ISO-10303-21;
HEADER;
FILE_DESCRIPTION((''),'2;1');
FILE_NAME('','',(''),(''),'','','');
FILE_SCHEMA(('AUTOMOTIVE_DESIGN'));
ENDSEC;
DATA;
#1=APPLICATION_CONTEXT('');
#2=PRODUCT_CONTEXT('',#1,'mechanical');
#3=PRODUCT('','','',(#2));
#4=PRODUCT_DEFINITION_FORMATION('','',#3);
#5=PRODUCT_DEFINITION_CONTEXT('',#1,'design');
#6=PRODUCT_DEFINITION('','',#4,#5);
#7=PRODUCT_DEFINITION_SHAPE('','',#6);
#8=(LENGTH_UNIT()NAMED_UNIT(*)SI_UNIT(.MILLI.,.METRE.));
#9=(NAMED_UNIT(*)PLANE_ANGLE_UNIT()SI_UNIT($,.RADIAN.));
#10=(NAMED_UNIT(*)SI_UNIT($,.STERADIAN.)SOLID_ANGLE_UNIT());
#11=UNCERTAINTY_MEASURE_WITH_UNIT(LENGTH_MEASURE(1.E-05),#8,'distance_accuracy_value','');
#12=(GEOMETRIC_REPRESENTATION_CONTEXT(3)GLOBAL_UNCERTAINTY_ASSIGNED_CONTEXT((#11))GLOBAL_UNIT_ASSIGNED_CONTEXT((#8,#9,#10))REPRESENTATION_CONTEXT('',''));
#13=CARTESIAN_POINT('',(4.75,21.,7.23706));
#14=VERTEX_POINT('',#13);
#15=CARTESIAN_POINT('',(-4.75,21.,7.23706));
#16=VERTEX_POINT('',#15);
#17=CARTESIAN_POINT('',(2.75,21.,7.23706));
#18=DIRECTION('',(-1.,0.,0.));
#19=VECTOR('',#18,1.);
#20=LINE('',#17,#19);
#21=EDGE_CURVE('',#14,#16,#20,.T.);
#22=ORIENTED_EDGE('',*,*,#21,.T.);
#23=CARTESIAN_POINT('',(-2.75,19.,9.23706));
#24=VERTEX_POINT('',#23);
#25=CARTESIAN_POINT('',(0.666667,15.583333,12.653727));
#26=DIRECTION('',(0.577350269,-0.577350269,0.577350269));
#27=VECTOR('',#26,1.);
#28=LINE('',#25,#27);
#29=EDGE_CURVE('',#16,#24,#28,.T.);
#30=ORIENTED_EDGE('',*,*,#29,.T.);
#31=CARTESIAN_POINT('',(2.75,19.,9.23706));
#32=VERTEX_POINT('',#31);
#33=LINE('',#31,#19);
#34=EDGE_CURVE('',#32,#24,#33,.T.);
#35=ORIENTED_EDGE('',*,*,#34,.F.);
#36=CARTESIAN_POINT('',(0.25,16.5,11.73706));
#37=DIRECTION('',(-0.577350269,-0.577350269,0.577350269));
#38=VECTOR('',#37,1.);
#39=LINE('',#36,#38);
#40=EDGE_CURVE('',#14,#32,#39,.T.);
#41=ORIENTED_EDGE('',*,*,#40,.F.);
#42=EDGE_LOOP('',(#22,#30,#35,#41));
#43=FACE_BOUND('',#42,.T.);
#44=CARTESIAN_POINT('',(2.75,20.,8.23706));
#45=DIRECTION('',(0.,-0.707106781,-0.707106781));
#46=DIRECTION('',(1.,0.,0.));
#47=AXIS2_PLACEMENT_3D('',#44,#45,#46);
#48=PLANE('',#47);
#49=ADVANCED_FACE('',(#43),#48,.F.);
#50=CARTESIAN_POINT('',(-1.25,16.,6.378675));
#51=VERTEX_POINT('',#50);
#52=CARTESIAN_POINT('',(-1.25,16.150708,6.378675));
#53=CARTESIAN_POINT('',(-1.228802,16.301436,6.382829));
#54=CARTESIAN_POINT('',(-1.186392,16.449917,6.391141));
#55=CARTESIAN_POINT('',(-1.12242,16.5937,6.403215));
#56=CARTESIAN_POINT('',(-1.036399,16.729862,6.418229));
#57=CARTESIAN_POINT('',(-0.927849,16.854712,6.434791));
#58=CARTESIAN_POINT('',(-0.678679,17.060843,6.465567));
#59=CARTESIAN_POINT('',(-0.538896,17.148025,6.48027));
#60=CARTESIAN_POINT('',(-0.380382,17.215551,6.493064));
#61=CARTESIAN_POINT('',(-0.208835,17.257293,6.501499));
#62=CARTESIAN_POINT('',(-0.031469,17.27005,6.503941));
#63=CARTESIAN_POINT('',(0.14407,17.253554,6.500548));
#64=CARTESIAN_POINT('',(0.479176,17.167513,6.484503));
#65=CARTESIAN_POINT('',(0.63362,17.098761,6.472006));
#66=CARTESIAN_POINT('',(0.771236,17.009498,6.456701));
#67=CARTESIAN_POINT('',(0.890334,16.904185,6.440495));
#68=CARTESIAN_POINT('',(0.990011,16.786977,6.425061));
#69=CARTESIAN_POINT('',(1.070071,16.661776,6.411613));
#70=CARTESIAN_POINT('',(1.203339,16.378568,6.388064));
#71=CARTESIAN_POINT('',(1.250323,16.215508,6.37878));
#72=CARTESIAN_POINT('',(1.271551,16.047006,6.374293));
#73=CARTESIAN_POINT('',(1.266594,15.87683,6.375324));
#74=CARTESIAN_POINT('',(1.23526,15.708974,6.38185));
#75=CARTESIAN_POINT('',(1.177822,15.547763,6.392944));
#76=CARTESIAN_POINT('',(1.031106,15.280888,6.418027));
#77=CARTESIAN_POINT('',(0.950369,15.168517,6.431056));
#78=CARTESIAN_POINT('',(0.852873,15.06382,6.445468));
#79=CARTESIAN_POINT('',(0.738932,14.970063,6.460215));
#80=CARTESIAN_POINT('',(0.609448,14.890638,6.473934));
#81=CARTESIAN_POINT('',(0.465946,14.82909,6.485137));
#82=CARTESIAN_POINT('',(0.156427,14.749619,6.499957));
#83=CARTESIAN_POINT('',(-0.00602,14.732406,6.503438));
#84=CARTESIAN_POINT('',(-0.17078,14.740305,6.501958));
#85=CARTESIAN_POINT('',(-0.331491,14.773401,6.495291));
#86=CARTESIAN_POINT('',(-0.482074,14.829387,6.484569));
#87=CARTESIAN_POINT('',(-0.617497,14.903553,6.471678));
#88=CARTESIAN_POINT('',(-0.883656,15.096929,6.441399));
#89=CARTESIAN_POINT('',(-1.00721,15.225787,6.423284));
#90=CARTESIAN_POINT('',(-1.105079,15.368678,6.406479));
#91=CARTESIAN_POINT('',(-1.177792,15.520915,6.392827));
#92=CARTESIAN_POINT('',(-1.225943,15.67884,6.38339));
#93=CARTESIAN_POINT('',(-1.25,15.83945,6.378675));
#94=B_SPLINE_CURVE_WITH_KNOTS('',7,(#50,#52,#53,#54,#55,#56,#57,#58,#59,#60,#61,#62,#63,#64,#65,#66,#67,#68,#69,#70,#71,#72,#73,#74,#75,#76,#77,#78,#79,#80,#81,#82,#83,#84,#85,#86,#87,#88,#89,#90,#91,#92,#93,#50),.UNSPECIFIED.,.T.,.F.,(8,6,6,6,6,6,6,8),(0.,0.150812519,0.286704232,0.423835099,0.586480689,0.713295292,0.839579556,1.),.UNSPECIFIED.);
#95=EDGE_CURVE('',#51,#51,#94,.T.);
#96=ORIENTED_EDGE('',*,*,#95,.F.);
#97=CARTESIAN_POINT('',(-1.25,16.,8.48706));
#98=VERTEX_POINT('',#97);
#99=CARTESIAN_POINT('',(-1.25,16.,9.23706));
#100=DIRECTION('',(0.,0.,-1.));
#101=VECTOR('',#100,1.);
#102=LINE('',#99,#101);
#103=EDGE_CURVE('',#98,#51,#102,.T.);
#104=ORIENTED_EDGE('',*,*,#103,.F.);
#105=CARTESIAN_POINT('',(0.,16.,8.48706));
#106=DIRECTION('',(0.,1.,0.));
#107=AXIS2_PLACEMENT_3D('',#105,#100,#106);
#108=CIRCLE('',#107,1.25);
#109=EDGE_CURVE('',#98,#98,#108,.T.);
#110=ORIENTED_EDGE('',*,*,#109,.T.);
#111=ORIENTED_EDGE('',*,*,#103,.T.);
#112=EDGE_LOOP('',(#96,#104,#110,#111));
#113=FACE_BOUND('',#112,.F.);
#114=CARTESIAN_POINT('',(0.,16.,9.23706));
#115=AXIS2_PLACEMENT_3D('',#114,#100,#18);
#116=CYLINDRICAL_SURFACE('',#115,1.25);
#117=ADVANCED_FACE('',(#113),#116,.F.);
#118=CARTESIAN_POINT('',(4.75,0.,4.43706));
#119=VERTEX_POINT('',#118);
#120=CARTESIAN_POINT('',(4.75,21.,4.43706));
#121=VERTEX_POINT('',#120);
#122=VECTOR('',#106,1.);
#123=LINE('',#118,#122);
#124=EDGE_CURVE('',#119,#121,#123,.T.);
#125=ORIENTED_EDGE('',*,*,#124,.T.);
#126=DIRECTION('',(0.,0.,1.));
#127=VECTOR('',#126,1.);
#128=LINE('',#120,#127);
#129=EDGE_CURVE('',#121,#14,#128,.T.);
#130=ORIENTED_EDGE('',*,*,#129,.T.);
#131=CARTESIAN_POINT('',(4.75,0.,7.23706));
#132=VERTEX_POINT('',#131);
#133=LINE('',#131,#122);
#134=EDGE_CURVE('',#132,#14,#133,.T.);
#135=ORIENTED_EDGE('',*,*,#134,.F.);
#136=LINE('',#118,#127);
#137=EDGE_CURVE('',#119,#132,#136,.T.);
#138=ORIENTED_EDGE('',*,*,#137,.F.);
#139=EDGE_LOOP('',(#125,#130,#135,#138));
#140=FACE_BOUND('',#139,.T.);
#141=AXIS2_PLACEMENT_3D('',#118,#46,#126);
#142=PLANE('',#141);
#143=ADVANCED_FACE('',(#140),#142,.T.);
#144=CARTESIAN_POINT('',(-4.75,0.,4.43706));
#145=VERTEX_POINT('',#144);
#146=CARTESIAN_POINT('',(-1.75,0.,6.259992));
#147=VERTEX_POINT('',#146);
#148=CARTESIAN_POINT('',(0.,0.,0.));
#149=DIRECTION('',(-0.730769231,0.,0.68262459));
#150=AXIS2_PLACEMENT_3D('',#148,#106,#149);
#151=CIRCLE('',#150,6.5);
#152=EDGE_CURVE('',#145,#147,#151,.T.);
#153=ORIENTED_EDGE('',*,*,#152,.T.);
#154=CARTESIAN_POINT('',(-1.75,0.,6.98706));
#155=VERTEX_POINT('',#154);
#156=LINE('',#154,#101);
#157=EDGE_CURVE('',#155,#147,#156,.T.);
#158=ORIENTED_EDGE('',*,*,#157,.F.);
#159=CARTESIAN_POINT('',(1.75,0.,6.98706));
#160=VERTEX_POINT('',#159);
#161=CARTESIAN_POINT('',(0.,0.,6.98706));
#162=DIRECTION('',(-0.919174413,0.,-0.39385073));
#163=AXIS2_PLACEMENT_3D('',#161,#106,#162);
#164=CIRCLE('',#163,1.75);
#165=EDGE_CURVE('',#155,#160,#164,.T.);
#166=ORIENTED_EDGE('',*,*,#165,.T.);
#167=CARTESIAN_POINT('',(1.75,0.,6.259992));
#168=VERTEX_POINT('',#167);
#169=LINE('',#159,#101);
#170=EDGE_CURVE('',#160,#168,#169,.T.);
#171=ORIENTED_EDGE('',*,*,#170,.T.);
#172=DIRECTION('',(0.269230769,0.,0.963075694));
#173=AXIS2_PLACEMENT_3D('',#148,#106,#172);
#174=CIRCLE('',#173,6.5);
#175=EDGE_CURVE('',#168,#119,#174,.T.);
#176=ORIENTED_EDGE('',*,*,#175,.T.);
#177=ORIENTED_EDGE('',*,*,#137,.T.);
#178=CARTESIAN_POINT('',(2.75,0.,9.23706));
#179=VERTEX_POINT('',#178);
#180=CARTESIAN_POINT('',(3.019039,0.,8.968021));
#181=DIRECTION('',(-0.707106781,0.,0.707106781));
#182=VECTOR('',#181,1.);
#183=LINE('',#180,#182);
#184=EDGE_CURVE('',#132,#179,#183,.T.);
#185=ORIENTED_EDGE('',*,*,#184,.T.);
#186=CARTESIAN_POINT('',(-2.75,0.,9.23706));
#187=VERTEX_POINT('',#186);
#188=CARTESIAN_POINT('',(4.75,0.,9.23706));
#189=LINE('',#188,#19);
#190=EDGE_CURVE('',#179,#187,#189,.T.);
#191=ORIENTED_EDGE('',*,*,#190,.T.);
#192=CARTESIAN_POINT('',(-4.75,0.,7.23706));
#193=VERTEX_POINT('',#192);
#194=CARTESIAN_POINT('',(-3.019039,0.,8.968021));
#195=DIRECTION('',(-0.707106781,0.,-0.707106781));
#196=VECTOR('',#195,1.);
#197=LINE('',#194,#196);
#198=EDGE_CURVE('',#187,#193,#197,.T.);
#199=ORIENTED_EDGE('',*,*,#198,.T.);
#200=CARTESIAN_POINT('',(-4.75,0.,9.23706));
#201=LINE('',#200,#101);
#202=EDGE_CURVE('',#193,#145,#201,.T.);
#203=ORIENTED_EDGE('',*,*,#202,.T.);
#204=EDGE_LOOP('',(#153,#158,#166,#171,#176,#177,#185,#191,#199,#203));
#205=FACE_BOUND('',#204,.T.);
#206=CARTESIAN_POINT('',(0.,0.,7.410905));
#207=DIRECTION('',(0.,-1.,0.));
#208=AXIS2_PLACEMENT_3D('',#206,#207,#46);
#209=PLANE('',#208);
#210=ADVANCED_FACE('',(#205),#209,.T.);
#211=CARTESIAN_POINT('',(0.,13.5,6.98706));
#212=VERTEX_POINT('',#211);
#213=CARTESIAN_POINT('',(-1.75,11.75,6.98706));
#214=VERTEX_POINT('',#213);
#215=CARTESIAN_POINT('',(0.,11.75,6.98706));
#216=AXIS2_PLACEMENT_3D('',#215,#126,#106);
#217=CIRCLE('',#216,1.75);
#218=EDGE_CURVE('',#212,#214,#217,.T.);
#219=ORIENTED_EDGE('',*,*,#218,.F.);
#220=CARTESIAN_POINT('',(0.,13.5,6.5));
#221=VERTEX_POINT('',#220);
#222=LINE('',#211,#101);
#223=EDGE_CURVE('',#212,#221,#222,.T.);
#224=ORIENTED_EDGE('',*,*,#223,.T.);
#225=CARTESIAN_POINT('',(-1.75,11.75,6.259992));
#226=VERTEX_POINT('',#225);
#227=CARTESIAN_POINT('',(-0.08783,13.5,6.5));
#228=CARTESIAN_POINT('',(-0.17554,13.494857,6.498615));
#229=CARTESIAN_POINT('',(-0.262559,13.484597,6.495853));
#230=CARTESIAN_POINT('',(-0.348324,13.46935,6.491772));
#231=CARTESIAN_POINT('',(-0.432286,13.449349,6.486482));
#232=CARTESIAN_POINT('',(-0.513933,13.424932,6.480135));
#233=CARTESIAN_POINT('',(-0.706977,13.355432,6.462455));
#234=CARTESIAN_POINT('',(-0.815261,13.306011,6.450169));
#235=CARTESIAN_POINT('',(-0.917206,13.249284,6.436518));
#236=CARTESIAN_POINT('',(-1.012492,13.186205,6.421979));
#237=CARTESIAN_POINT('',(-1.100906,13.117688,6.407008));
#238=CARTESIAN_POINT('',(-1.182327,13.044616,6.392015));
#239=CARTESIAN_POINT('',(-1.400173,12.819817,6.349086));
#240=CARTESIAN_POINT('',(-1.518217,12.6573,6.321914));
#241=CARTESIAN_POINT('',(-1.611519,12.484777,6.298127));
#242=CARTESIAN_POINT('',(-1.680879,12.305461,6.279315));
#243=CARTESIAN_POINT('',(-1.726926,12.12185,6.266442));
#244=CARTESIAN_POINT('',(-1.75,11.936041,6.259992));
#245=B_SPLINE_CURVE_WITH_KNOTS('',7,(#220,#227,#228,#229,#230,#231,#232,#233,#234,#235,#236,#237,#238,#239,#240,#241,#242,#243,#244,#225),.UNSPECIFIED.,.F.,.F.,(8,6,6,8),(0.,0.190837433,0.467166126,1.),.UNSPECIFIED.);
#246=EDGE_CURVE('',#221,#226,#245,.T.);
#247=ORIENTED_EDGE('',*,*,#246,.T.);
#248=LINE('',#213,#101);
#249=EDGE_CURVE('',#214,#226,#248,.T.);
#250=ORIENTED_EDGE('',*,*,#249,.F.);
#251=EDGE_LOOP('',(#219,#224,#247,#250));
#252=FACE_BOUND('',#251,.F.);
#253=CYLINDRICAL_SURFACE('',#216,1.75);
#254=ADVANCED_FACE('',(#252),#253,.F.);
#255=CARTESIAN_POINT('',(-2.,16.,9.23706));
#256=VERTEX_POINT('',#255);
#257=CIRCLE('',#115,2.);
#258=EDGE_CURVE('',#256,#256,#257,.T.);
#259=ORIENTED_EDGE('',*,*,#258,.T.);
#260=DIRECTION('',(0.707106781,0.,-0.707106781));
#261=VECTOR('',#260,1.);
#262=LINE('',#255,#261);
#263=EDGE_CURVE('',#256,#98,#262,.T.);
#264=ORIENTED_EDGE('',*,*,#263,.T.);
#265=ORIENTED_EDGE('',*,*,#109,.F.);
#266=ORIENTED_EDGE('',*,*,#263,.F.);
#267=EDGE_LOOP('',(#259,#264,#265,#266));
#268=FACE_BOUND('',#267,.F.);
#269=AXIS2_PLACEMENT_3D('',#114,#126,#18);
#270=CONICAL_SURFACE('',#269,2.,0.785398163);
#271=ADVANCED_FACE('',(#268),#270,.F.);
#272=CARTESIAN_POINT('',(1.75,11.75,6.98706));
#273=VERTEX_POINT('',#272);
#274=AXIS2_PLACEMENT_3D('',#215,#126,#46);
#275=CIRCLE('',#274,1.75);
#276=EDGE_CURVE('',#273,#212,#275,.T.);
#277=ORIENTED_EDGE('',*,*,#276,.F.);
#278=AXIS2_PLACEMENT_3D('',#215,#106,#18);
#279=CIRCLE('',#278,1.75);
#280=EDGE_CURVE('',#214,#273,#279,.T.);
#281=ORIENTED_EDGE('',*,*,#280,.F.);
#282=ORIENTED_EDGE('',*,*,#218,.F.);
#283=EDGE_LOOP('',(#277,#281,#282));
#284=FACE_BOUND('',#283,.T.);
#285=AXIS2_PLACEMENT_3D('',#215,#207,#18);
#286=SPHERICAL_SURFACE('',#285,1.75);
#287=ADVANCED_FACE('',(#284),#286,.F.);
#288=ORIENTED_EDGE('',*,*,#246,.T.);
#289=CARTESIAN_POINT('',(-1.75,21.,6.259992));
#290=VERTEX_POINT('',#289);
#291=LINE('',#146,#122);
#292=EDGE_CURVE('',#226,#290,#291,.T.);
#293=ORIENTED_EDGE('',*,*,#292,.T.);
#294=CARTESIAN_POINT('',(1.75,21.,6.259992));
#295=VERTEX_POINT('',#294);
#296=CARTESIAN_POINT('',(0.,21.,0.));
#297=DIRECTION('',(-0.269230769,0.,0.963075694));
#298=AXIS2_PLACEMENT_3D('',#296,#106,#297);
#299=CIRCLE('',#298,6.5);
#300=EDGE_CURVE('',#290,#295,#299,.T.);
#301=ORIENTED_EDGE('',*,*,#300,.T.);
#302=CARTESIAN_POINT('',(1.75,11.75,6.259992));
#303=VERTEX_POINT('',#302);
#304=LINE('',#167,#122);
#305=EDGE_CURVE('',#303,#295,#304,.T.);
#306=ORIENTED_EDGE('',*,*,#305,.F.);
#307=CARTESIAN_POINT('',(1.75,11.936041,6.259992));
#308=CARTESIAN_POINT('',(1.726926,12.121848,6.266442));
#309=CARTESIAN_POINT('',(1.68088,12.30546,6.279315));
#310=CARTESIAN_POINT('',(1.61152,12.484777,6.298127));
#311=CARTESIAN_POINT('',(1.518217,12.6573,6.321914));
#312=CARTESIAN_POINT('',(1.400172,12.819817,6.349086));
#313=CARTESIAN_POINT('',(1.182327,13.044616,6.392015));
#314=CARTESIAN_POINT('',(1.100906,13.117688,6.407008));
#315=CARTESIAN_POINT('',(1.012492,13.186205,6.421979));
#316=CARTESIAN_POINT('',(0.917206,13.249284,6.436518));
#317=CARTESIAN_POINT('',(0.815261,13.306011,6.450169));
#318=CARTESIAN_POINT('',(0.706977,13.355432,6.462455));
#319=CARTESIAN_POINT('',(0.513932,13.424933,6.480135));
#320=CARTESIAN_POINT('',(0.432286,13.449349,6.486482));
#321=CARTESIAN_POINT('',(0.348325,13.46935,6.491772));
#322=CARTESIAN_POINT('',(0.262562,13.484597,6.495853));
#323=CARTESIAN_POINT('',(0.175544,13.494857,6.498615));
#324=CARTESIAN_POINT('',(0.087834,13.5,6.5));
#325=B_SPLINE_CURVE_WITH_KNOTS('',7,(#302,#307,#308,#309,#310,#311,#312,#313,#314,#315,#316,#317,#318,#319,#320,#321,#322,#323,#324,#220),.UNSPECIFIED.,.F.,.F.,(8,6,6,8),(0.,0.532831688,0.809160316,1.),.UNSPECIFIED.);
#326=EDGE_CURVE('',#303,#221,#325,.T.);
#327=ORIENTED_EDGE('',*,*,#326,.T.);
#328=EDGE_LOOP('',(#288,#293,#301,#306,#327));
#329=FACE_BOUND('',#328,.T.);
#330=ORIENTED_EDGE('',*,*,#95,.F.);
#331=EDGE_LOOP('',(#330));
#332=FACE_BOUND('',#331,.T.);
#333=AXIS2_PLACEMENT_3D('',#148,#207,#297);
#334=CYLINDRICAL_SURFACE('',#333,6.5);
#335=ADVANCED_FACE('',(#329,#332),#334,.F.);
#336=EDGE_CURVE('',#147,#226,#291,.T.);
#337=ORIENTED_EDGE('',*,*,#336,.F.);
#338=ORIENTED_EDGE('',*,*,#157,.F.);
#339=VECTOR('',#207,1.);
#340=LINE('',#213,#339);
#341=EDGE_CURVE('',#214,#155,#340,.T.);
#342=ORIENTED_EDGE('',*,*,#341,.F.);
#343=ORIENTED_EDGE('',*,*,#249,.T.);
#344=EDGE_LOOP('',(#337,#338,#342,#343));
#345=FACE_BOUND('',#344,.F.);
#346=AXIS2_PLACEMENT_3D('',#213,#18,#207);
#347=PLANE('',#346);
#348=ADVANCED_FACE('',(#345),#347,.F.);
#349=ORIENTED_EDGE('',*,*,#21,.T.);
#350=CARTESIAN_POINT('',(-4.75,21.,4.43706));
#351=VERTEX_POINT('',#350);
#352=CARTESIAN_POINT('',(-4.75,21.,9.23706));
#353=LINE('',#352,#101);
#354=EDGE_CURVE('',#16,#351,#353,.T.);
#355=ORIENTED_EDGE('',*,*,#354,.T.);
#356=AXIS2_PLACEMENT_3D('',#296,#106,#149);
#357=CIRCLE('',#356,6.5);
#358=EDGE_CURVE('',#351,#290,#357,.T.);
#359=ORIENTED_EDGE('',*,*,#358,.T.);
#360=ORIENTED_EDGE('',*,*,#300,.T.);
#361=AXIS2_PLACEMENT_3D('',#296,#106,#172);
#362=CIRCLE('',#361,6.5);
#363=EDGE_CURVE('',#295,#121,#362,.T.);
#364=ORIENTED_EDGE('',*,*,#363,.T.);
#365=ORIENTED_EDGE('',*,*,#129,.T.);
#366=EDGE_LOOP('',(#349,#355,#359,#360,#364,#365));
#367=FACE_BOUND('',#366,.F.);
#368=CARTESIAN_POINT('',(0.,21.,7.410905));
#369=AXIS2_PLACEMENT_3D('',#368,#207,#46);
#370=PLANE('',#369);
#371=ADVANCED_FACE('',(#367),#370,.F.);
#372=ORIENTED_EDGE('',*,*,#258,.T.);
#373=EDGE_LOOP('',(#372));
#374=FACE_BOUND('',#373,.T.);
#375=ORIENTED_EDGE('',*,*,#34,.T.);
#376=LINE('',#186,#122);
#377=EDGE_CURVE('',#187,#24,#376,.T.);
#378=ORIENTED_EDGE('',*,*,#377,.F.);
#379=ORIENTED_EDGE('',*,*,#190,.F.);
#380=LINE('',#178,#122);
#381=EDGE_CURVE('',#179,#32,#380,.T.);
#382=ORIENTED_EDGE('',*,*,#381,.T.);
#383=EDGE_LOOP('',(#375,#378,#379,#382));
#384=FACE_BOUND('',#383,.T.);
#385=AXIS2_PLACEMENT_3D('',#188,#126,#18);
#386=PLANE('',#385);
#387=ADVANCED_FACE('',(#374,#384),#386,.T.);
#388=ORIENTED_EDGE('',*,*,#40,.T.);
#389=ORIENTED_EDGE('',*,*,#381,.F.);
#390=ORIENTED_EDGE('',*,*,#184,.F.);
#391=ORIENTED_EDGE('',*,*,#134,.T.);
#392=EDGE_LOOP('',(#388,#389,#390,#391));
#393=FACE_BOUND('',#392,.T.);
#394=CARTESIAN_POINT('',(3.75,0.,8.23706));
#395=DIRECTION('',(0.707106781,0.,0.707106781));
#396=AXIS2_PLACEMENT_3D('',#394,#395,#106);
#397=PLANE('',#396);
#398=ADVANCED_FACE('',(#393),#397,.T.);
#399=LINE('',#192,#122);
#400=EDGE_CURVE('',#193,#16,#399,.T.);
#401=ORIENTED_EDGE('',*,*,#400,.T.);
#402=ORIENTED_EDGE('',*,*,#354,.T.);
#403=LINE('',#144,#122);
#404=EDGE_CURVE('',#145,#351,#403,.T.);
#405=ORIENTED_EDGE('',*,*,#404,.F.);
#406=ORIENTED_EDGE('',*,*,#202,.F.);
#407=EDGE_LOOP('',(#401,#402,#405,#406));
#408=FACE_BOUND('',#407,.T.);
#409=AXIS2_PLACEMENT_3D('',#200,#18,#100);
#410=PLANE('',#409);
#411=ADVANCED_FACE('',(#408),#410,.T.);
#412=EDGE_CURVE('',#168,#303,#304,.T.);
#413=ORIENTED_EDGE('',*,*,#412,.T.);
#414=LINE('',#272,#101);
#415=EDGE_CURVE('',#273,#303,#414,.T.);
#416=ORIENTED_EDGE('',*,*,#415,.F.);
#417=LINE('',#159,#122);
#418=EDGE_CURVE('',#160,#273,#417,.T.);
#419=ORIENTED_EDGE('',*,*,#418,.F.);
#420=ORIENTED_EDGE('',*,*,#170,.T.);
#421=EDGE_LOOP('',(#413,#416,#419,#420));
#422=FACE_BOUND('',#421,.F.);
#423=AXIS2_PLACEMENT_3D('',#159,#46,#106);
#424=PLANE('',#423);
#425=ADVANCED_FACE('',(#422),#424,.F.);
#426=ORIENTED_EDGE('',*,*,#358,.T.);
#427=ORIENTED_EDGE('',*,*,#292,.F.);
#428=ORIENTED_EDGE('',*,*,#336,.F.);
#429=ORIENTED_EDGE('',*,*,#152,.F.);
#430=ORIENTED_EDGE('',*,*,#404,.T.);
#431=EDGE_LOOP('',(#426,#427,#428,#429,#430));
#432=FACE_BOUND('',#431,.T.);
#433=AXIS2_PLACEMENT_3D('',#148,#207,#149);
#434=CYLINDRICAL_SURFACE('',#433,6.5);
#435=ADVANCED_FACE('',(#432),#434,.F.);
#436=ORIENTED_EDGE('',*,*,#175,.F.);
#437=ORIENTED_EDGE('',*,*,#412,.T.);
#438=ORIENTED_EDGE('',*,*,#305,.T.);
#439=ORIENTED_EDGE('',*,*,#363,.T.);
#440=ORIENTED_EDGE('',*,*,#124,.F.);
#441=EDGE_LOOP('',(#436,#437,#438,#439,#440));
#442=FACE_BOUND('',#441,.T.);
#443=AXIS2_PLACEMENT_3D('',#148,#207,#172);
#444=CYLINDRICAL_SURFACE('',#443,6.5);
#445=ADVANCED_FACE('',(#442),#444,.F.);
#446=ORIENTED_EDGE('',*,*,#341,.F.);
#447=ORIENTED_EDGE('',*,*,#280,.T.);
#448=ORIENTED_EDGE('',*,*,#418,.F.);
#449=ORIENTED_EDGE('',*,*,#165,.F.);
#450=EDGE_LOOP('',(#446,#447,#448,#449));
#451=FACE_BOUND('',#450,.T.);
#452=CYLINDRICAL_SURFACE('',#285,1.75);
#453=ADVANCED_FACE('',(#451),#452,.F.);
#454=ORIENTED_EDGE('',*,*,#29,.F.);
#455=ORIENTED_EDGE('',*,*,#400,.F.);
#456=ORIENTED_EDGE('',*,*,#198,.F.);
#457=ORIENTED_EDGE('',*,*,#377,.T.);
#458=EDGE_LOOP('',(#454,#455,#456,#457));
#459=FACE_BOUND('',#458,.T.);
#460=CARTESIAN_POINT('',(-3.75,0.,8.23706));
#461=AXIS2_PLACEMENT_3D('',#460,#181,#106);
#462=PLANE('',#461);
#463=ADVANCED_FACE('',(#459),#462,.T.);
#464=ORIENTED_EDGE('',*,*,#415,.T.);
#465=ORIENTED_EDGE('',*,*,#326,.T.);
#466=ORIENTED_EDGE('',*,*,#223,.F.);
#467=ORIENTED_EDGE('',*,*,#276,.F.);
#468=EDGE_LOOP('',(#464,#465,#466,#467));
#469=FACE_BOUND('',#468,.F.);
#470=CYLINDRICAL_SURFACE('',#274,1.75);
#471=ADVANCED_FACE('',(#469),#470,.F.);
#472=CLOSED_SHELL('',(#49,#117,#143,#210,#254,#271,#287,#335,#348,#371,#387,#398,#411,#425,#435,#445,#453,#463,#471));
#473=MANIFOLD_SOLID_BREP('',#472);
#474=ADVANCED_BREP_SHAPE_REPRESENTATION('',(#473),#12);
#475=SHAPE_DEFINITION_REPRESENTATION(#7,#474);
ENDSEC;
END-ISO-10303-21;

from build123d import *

# Parameters (mm, degrees)
F6_DEPTH        = 21
F7_SIZE         = 2
F8_SIZE         = 2
F12_DEPTH       = 2.5510001
F14_D           = 2.5
F14_CSINK_D     = 4
F14_CSINK_ANGLE = 90


# Not quite as in the source:
# - a feature names something its author has since deleted; it is built from what else it names


with BuildPart() as f6:
    # F5 (on Front) → F6 (new body)
    with BuildSketch(Plane.XZ):
        with BuildLine():
            ThreePointArc((1.75, 6.2599920128), (3.3753918927, 5.5548833985), (4.75, 4.4370598373))
            Line((4.75, 4.4370598373), (4.75, 9.2370598373))
            Line((4.75, 9.2370598373), (-4.75, 9.2370598373))
            Line((-4.75, 9.2370598373), (-4.75, 4.4370598373))
            ThreePointArc((-4.75, 4.4370598373), (-3.3753918927, 5.5548833985), (-1.75, 6.2599920128))
            Line((-1.75, 6.2599920128), (-1.75, 6.9870598373))
            ThreePointArc((-1.75, 6.9870598373), (0, 8.7370598373), (1.75, 6.9870598373))
            Line((1.75, 6.9870598373), (1.75, 6.2599920128))
        make_face()
        with BuildLine():
            ThreePointArc((-1.75, 6.2599920128), (0, 6.5), (1.75, 6.2599920128))
            Line((1.75, 6.2599920128), (1.75, 6.9870598373))
            ThreePointArc((1.75, 6.9870598373), (0, 8.7370598373), (-1.75, 6.9870598373))
            Line((-1.75, 6.9870598373), (-1.75, 6.2599920128))
        make_face()
    extrude(amount=-F6_DEPTH)

    # F7
    f7_edges = [f6.edges().sort_by_distance(p)[0] for p in [
        (-4.75, 10.5, 9.23706),
        (4.75, 10.5, 9.23706),
    ]]
    chamfer(f7_edges, length=F7_SIZE)

    # F8
    f8_edges = [f6.edges().sort_by_distance(p)[0] for p in [
        (0, 21, 9.23706),
    ]]
    chamfer(f8_edges, length=F8_SIZE)

    # F10 (on offset) → F11 (revolve, cut)
    with BuildSketch(Plane.XY.offset(6.9870598373)):
        with BuildLine():
            Line((-1.75, 11.75), (-1.75, 0))
            Line((-1.75, 0), (0, 0))
            Line((0, 0), (0, 13.5))
            ThreePointArc((0, 13.5), (-1.2374368671, 12.9874368671), (-1.75, 11.75))
        make_face()
    revolve(axis=Axis((0, 6.75, 6.9870598373), (0, 1, 0)), mode=Mode.SUBTRACT)

    # F10 (on offset) → F12 (cut, through all)
    with BuildSketch(Plane.XY.offset(6.9870598373)):
        with BuildLine():
            Line((0, 13.5), (0, 0))
            Line((0, 0), (1.75, 0))
            Line((1.75, 0), (1.75, 11.75))
            ThreePointArc((1.75, 11.75), (1.2374368671, 12.9874368671), (0, 13.5))
        make_face()
        with BuildLine():
            Line((-1.75, 11.75), (-1.75, 0))
            Line((-1.75, 0), (0, 0))
            Line((0, 0), (0, 13.5))
            ThreePointArc((0, 13.5), (-1.2374368671, 12.9874368671), (-1.75, 11.75))
        make_face()
    extrude(amount=-F12_DEPTH, mode=Mode.SUBTRACT)

    # F14 (through all)
    with Locations(Plane.XY.offset(9.2370598373)):
        with Locations((0, 16)):
            CounterSinkHole(F14_D / 2, F14_CSINK_D / 2, counter_sink_angle=F14_CSINK_ANGLE)


solid = f6.part
